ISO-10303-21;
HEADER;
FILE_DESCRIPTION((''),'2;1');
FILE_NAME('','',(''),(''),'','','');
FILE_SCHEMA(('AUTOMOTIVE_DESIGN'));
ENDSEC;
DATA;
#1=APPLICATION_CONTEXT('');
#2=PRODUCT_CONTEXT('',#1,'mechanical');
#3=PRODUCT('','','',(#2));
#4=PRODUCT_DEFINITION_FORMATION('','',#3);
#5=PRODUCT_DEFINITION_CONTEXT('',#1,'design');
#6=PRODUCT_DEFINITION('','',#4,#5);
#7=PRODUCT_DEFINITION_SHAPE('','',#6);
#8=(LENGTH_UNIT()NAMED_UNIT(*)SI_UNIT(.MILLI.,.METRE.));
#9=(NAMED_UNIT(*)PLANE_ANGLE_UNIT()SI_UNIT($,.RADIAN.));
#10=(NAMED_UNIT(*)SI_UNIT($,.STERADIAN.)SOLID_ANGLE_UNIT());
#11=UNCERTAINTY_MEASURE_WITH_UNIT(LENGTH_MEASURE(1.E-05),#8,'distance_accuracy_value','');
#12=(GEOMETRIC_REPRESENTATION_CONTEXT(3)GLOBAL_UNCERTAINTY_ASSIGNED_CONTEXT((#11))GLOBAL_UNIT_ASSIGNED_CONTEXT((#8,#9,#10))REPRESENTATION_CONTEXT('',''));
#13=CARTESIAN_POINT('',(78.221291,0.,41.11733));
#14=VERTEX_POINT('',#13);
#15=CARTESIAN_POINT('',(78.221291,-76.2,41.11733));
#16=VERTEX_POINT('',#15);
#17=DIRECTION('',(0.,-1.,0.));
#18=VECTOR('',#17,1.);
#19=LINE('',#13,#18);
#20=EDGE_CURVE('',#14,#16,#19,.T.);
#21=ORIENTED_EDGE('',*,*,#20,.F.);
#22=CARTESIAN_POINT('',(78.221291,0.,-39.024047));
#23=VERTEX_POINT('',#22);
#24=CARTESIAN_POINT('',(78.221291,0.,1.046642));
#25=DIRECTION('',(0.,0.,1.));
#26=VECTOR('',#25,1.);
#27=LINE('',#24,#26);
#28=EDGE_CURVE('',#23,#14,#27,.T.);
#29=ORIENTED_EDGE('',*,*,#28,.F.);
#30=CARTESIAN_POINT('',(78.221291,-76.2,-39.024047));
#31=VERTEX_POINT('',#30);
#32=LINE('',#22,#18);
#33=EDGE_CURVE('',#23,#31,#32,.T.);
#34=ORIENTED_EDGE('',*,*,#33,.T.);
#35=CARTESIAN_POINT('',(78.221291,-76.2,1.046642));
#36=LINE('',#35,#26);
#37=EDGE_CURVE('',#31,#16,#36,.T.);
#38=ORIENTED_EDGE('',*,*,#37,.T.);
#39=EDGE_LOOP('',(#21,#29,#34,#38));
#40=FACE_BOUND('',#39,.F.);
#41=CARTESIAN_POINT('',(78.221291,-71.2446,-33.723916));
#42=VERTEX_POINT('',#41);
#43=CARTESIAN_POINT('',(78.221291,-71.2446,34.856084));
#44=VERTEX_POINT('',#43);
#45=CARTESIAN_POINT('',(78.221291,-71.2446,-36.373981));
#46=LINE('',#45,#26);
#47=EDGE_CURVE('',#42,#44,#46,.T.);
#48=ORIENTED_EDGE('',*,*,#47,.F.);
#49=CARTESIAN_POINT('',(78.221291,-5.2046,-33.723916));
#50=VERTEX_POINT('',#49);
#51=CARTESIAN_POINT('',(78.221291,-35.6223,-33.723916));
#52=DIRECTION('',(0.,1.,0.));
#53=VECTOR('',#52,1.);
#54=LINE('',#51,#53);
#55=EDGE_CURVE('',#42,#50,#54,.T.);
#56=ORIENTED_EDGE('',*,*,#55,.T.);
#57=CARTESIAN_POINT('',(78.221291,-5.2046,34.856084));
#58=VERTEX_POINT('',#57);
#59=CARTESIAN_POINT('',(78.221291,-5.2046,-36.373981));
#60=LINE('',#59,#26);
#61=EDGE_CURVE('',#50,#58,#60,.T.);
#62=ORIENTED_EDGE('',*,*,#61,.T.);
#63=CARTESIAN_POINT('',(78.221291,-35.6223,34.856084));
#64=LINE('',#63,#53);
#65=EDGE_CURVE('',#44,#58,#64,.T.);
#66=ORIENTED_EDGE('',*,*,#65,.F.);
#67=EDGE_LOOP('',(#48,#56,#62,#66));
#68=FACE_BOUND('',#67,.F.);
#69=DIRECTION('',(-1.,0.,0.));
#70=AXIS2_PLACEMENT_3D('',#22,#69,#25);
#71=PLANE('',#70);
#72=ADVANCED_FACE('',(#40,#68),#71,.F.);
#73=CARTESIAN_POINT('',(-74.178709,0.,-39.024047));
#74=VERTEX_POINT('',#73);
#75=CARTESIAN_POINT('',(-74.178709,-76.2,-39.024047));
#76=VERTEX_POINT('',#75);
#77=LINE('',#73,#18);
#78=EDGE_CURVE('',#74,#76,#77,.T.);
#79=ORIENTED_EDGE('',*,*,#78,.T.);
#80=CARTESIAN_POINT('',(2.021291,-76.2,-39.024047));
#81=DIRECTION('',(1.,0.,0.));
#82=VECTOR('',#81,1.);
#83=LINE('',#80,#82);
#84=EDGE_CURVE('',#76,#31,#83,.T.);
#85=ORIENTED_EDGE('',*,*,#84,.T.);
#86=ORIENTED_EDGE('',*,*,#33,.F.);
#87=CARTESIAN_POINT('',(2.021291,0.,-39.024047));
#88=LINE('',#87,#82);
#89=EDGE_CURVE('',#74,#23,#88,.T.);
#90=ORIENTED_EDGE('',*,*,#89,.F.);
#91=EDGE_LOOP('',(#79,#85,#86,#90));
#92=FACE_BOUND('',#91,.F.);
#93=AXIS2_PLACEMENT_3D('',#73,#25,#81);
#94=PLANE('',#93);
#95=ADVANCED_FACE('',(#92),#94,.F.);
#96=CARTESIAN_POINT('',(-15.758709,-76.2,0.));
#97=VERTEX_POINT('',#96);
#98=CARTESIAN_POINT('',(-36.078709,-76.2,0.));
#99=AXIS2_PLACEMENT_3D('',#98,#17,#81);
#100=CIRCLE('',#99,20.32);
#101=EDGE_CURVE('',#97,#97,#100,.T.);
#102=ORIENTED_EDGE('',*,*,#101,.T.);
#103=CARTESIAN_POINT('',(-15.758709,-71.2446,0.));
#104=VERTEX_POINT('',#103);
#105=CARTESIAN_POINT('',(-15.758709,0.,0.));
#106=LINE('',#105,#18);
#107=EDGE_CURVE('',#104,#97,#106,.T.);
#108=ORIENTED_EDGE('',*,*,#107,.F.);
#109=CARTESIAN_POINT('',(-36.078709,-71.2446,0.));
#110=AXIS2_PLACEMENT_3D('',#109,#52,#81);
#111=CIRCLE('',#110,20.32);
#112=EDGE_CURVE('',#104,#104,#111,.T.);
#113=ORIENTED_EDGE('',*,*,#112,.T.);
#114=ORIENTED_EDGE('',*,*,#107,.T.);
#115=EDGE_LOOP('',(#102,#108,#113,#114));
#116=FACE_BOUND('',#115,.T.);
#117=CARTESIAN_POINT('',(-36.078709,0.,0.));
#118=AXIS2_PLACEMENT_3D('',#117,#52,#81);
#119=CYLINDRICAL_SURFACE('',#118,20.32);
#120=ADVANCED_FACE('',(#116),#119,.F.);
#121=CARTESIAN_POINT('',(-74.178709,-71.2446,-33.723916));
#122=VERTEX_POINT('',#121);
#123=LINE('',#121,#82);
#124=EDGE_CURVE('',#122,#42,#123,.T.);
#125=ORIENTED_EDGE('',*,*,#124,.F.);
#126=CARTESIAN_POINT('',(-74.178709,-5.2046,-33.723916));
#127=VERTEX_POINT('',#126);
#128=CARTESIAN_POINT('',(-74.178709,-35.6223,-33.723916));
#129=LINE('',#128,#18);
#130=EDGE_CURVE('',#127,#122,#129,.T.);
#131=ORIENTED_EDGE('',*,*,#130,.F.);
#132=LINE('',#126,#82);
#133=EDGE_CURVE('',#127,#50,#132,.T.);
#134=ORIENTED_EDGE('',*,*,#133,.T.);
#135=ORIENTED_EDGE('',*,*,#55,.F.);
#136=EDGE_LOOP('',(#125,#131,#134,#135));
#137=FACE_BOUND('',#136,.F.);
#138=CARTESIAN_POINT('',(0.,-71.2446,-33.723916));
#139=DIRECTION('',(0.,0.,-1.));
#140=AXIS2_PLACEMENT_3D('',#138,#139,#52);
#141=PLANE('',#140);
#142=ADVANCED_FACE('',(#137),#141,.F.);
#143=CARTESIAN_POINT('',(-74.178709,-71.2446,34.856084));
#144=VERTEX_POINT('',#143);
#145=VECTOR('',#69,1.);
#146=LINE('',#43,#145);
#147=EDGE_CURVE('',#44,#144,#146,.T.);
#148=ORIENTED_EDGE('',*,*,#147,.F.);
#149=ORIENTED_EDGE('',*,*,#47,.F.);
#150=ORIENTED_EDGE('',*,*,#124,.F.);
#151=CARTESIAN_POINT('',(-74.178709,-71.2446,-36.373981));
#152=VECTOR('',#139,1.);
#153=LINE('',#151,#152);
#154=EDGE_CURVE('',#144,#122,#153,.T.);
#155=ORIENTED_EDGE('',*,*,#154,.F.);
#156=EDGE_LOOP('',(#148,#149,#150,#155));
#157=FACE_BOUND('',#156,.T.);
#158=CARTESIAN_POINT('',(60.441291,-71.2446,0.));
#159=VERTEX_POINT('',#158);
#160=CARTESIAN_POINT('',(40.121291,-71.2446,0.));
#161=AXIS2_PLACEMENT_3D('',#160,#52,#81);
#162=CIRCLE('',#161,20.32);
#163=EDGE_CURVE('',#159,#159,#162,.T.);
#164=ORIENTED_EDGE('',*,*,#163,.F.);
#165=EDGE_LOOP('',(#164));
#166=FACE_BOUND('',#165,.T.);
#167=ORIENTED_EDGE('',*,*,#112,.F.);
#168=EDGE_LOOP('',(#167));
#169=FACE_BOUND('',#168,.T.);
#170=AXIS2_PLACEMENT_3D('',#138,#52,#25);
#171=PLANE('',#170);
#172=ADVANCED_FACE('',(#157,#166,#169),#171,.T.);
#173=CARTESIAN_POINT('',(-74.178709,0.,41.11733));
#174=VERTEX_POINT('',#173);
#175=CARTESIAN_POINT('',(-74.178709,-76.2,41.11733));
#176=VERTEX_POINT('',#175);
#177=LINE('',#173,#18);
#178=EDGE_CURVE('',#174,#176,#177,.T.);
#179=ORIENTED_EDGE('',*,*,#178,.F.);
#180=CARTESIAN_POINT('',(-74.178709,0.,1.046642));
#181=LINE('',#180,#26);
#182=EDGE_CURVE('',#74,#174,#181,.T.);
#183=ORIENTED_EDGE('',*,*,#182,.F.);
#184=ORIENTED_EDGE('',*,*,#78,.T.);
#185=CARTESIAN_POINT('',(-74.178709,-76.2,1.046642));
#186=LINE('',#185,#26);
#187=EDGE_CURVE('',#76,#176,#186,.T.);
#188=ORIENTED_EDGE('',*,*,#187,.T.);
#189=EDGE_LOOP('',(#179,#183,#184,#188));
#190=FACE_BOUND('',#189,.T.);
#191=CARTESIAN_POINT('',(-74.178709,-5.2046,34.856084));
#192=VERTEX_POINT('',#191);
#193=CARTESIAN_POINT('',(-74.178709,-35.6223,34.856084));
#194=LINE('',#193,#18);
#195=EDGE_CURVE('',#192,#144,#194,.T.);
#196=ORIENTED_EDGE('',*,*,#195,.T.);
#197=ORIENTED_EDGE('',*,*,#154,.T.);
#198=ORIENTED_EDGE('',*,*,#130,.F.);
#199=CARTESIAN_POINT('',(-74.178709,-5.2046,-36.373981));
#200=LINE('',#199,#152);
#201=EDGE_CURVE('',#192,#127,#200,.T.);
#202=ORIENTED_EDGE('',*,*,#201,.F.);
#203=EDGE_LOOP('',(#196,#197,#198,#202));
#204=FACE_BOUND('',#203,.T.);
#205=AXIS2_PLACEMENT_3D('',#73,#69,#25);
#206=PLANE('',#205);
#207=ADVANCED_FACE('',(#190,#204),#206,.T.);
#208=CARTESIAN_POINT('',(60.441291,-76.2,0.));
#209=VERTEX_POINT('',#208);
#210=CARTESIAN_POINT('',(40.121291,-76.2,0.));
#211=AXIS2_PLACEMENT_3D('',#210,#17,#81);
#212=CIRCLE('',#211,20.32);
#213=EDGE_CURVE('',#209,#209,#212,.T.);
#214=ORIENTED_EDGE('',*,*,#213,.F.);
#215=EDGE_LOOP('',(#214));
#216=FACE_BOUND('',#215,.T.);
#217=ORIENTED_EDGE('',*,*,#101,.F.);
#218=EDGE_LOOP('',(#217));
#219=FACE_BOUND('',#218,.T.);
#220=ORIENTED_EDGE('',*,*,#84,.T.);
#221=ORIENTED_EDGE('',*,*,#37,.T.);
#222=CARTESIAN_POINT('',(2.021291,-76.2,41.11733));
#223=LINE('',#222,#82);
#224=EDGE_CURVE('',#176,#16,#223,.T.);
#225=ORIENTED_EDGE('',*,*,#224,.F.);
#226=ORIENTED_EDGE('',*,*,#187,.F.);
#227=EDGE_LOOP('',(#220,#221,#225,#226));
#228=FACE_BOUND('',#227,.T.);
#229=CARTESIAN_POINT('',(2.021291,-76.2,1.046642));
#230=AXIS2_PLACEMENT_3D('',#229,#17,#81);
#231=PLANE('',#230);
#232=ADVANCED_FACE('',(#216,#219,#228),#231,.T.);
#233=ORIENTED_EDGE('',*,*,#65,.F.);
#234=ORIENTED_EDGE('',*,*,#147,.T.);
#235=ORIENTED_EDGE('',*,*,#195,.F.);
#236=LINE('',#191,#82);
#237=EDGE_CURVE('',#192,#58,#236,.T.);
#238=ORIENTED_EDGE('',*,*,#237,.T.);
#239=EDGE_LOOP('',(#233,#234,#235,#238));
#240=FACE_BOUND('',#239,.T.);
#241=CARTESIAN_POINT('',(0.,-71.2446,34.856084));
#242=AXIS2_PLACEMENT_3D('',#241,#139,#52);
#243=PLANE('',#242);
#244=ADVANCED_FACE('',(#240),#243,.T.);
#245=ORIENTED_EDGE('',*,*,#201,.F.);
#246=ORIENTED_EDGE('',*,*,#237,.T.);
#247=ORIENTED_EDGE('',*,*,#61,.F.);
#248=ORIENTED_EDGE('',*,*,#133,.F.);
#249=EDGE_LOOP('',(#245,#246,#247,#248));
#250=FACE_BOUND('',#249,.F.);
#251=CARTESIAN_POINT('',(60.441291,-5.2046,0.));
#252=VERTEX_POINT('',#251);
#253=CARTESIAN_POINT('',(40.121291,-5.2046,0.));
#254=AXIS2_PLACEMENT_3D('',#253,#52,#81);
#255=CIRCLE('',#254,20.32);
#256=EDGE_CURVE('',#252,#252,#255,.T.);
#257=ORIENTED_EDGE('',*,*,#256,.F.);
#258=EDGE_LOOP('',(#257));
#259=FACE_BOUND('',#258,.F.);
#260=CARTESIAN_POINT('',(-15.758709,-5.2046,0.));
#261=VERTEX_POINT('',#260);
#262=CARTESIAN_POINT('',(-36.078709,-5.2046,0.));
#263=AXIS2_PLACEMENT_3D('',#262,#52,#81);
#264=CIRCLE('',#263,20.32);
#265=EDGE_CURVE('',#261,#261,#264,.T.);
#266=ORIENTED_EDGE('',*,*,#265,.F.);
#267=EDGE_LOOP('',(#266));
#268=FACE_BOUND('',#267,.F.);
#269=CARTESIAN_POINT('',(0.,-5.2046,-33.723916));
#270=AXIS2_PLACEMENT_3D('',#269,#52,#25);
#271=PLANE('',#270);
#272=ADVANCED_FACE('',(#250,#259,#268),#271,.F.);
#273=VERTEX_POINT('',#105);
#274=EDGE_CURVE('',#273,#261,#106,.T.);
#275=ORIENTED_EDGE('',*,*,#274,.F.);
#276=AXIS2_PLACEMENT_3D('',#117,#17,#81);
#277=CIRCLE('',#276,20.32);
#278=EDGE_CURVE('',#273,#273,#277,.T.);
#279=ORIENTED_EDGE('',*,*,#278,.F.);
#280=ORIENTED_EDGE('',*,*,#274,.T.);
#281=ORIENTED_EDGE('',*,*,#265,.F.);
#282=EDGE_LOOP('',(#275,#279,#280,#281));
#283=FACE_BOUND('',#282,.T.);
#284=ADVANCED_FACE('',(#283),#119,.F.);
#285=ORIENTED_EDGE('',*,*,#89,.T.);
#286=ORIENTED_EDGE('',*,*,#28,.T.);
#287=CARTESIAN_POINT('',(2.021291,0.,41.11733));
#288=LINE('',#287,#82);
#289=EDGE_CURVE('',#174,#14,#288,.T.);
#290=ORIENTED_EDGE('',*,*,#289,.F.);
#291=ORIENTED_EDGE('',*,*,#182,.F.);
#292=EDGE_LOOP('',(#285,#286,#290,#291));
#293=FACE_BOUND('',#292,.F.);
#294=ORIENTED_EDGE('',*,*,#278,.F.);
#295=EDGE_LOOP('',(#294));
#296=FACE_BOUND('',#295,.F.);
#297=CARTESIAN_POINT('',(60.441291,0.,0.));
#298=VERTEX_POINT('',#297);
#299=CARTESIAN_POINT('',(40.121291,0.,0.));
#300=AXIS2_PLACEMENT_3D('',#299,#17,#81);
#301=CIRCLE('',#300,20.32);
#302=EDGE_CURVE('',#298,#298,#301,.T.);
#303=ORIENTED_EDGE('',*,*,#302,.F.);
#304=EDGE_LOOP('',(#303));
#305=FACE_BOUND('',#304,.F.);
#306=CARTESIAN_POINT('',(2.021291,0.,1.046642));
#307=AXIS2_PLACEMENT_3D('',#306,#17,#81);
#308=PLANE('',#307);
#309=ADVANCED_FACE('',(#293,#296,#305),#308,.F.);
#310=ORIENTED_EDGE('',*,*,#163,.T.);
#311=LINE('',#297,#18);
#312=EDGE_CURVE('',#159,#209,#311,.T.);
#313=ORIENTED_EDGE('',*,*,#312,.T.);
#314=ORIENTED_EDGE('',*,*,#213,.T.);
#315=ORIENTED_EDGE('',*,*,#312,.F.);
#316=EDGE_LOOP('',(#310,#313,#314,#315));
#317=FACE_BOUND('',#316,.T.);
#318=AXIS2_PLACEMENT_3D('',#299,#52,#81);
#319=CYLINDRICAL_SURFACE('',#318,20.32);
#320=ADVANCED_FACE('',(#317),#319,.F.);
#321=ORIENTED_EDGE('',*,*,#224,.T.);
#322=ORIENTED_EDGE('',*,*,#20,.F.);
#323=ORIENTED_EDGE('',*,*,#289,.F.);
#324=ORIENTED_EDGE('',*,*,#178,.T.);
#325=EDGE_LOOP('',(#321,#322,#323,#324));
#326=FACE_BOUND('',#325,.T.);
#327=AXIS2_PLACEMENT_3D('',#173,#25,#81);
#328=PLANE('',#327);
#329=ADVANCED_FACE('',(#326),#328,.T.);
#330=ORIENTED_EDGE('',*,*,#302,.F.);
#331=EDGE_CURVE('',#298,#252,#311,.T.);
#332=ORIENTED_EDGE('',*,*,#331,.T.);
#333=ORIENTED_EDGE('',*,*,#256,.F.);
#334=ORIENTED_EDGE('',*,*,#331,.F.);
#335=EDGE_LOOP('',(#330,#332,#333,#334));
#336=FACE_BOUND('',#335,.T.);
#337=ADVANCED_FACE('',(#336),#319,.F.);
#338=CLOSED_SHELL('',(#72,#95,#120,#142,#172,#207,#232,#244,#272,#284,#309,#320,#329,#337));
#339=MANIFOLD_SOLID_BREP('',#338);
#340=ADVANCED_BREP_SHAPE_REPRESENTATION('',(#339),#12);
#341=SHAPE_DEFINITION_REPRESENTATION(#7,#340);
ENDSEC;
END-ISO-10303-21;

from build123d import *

# Parameters (mm, degrees)
F0_W     = 152.4
F0_H     = 80.1413774056
F0_R     = 20.32
F1_DEPTH = 76.2
F2_W     = 66.04
F2_H     = 68.58
F4_DEPTH = 203.2
F5_DEPTH = 203.2
F6_W     = 77.2189535201
F6_H     = 20.4676762223
F7_DEPTH = 25.4


# Not quite as in the source:
# - the program builds the solid bodies; features that only make, move or delete a surface that nothing else refers to are left out


with BuildPart() as f1:
    # F0 (on Front) → F1 (new body)
    with BuildSketch(Plane.XZ):
        with Locations((2.0212908328, 1.0466417298)):
            Rectangle(F0_W, F0_H)
        with Locations((-36.0787091672, 0)):
            Circle(F0_R, mode=Mode.SUBTRACT)
        with Locations((40.1212908328, 0)):
            Circle(F0_R, mode=Mode.SUBTRACT)
    extrude(amount=F1_DEPTH)

    # F2 (on Right) → F4 (cut)
    with BuildSketch(Plane.YZ):
        with Locations((-38.2246004883, 0.5660843734)):
            Rectangle(F2_W, F2_H)
    extrude(amount=-F4_DEPTH, mode=Mode.SUBTRACT)

    # F5 (cut): a face of the model
    f5_faces = [f1.faces().sort_by_distance(p)[0] for p in [
        (0, -38.2246004883, 0.5660843734),
    ]]
    extrude(f5_faces, amount=-F5_DEPTH, mode=Mode.SUBTRACT)

    # F6 (on Top) → F7 (cut)
    with BuildSketch(Plane.XY):
        with Locations((2.0572859794, -37.5628359616)):
            Rectangle(F6_W, F6_H)
    extrude(amount=-F7_DEPTH, mode=Mode.SUBTRACT)


solid = f1.part
